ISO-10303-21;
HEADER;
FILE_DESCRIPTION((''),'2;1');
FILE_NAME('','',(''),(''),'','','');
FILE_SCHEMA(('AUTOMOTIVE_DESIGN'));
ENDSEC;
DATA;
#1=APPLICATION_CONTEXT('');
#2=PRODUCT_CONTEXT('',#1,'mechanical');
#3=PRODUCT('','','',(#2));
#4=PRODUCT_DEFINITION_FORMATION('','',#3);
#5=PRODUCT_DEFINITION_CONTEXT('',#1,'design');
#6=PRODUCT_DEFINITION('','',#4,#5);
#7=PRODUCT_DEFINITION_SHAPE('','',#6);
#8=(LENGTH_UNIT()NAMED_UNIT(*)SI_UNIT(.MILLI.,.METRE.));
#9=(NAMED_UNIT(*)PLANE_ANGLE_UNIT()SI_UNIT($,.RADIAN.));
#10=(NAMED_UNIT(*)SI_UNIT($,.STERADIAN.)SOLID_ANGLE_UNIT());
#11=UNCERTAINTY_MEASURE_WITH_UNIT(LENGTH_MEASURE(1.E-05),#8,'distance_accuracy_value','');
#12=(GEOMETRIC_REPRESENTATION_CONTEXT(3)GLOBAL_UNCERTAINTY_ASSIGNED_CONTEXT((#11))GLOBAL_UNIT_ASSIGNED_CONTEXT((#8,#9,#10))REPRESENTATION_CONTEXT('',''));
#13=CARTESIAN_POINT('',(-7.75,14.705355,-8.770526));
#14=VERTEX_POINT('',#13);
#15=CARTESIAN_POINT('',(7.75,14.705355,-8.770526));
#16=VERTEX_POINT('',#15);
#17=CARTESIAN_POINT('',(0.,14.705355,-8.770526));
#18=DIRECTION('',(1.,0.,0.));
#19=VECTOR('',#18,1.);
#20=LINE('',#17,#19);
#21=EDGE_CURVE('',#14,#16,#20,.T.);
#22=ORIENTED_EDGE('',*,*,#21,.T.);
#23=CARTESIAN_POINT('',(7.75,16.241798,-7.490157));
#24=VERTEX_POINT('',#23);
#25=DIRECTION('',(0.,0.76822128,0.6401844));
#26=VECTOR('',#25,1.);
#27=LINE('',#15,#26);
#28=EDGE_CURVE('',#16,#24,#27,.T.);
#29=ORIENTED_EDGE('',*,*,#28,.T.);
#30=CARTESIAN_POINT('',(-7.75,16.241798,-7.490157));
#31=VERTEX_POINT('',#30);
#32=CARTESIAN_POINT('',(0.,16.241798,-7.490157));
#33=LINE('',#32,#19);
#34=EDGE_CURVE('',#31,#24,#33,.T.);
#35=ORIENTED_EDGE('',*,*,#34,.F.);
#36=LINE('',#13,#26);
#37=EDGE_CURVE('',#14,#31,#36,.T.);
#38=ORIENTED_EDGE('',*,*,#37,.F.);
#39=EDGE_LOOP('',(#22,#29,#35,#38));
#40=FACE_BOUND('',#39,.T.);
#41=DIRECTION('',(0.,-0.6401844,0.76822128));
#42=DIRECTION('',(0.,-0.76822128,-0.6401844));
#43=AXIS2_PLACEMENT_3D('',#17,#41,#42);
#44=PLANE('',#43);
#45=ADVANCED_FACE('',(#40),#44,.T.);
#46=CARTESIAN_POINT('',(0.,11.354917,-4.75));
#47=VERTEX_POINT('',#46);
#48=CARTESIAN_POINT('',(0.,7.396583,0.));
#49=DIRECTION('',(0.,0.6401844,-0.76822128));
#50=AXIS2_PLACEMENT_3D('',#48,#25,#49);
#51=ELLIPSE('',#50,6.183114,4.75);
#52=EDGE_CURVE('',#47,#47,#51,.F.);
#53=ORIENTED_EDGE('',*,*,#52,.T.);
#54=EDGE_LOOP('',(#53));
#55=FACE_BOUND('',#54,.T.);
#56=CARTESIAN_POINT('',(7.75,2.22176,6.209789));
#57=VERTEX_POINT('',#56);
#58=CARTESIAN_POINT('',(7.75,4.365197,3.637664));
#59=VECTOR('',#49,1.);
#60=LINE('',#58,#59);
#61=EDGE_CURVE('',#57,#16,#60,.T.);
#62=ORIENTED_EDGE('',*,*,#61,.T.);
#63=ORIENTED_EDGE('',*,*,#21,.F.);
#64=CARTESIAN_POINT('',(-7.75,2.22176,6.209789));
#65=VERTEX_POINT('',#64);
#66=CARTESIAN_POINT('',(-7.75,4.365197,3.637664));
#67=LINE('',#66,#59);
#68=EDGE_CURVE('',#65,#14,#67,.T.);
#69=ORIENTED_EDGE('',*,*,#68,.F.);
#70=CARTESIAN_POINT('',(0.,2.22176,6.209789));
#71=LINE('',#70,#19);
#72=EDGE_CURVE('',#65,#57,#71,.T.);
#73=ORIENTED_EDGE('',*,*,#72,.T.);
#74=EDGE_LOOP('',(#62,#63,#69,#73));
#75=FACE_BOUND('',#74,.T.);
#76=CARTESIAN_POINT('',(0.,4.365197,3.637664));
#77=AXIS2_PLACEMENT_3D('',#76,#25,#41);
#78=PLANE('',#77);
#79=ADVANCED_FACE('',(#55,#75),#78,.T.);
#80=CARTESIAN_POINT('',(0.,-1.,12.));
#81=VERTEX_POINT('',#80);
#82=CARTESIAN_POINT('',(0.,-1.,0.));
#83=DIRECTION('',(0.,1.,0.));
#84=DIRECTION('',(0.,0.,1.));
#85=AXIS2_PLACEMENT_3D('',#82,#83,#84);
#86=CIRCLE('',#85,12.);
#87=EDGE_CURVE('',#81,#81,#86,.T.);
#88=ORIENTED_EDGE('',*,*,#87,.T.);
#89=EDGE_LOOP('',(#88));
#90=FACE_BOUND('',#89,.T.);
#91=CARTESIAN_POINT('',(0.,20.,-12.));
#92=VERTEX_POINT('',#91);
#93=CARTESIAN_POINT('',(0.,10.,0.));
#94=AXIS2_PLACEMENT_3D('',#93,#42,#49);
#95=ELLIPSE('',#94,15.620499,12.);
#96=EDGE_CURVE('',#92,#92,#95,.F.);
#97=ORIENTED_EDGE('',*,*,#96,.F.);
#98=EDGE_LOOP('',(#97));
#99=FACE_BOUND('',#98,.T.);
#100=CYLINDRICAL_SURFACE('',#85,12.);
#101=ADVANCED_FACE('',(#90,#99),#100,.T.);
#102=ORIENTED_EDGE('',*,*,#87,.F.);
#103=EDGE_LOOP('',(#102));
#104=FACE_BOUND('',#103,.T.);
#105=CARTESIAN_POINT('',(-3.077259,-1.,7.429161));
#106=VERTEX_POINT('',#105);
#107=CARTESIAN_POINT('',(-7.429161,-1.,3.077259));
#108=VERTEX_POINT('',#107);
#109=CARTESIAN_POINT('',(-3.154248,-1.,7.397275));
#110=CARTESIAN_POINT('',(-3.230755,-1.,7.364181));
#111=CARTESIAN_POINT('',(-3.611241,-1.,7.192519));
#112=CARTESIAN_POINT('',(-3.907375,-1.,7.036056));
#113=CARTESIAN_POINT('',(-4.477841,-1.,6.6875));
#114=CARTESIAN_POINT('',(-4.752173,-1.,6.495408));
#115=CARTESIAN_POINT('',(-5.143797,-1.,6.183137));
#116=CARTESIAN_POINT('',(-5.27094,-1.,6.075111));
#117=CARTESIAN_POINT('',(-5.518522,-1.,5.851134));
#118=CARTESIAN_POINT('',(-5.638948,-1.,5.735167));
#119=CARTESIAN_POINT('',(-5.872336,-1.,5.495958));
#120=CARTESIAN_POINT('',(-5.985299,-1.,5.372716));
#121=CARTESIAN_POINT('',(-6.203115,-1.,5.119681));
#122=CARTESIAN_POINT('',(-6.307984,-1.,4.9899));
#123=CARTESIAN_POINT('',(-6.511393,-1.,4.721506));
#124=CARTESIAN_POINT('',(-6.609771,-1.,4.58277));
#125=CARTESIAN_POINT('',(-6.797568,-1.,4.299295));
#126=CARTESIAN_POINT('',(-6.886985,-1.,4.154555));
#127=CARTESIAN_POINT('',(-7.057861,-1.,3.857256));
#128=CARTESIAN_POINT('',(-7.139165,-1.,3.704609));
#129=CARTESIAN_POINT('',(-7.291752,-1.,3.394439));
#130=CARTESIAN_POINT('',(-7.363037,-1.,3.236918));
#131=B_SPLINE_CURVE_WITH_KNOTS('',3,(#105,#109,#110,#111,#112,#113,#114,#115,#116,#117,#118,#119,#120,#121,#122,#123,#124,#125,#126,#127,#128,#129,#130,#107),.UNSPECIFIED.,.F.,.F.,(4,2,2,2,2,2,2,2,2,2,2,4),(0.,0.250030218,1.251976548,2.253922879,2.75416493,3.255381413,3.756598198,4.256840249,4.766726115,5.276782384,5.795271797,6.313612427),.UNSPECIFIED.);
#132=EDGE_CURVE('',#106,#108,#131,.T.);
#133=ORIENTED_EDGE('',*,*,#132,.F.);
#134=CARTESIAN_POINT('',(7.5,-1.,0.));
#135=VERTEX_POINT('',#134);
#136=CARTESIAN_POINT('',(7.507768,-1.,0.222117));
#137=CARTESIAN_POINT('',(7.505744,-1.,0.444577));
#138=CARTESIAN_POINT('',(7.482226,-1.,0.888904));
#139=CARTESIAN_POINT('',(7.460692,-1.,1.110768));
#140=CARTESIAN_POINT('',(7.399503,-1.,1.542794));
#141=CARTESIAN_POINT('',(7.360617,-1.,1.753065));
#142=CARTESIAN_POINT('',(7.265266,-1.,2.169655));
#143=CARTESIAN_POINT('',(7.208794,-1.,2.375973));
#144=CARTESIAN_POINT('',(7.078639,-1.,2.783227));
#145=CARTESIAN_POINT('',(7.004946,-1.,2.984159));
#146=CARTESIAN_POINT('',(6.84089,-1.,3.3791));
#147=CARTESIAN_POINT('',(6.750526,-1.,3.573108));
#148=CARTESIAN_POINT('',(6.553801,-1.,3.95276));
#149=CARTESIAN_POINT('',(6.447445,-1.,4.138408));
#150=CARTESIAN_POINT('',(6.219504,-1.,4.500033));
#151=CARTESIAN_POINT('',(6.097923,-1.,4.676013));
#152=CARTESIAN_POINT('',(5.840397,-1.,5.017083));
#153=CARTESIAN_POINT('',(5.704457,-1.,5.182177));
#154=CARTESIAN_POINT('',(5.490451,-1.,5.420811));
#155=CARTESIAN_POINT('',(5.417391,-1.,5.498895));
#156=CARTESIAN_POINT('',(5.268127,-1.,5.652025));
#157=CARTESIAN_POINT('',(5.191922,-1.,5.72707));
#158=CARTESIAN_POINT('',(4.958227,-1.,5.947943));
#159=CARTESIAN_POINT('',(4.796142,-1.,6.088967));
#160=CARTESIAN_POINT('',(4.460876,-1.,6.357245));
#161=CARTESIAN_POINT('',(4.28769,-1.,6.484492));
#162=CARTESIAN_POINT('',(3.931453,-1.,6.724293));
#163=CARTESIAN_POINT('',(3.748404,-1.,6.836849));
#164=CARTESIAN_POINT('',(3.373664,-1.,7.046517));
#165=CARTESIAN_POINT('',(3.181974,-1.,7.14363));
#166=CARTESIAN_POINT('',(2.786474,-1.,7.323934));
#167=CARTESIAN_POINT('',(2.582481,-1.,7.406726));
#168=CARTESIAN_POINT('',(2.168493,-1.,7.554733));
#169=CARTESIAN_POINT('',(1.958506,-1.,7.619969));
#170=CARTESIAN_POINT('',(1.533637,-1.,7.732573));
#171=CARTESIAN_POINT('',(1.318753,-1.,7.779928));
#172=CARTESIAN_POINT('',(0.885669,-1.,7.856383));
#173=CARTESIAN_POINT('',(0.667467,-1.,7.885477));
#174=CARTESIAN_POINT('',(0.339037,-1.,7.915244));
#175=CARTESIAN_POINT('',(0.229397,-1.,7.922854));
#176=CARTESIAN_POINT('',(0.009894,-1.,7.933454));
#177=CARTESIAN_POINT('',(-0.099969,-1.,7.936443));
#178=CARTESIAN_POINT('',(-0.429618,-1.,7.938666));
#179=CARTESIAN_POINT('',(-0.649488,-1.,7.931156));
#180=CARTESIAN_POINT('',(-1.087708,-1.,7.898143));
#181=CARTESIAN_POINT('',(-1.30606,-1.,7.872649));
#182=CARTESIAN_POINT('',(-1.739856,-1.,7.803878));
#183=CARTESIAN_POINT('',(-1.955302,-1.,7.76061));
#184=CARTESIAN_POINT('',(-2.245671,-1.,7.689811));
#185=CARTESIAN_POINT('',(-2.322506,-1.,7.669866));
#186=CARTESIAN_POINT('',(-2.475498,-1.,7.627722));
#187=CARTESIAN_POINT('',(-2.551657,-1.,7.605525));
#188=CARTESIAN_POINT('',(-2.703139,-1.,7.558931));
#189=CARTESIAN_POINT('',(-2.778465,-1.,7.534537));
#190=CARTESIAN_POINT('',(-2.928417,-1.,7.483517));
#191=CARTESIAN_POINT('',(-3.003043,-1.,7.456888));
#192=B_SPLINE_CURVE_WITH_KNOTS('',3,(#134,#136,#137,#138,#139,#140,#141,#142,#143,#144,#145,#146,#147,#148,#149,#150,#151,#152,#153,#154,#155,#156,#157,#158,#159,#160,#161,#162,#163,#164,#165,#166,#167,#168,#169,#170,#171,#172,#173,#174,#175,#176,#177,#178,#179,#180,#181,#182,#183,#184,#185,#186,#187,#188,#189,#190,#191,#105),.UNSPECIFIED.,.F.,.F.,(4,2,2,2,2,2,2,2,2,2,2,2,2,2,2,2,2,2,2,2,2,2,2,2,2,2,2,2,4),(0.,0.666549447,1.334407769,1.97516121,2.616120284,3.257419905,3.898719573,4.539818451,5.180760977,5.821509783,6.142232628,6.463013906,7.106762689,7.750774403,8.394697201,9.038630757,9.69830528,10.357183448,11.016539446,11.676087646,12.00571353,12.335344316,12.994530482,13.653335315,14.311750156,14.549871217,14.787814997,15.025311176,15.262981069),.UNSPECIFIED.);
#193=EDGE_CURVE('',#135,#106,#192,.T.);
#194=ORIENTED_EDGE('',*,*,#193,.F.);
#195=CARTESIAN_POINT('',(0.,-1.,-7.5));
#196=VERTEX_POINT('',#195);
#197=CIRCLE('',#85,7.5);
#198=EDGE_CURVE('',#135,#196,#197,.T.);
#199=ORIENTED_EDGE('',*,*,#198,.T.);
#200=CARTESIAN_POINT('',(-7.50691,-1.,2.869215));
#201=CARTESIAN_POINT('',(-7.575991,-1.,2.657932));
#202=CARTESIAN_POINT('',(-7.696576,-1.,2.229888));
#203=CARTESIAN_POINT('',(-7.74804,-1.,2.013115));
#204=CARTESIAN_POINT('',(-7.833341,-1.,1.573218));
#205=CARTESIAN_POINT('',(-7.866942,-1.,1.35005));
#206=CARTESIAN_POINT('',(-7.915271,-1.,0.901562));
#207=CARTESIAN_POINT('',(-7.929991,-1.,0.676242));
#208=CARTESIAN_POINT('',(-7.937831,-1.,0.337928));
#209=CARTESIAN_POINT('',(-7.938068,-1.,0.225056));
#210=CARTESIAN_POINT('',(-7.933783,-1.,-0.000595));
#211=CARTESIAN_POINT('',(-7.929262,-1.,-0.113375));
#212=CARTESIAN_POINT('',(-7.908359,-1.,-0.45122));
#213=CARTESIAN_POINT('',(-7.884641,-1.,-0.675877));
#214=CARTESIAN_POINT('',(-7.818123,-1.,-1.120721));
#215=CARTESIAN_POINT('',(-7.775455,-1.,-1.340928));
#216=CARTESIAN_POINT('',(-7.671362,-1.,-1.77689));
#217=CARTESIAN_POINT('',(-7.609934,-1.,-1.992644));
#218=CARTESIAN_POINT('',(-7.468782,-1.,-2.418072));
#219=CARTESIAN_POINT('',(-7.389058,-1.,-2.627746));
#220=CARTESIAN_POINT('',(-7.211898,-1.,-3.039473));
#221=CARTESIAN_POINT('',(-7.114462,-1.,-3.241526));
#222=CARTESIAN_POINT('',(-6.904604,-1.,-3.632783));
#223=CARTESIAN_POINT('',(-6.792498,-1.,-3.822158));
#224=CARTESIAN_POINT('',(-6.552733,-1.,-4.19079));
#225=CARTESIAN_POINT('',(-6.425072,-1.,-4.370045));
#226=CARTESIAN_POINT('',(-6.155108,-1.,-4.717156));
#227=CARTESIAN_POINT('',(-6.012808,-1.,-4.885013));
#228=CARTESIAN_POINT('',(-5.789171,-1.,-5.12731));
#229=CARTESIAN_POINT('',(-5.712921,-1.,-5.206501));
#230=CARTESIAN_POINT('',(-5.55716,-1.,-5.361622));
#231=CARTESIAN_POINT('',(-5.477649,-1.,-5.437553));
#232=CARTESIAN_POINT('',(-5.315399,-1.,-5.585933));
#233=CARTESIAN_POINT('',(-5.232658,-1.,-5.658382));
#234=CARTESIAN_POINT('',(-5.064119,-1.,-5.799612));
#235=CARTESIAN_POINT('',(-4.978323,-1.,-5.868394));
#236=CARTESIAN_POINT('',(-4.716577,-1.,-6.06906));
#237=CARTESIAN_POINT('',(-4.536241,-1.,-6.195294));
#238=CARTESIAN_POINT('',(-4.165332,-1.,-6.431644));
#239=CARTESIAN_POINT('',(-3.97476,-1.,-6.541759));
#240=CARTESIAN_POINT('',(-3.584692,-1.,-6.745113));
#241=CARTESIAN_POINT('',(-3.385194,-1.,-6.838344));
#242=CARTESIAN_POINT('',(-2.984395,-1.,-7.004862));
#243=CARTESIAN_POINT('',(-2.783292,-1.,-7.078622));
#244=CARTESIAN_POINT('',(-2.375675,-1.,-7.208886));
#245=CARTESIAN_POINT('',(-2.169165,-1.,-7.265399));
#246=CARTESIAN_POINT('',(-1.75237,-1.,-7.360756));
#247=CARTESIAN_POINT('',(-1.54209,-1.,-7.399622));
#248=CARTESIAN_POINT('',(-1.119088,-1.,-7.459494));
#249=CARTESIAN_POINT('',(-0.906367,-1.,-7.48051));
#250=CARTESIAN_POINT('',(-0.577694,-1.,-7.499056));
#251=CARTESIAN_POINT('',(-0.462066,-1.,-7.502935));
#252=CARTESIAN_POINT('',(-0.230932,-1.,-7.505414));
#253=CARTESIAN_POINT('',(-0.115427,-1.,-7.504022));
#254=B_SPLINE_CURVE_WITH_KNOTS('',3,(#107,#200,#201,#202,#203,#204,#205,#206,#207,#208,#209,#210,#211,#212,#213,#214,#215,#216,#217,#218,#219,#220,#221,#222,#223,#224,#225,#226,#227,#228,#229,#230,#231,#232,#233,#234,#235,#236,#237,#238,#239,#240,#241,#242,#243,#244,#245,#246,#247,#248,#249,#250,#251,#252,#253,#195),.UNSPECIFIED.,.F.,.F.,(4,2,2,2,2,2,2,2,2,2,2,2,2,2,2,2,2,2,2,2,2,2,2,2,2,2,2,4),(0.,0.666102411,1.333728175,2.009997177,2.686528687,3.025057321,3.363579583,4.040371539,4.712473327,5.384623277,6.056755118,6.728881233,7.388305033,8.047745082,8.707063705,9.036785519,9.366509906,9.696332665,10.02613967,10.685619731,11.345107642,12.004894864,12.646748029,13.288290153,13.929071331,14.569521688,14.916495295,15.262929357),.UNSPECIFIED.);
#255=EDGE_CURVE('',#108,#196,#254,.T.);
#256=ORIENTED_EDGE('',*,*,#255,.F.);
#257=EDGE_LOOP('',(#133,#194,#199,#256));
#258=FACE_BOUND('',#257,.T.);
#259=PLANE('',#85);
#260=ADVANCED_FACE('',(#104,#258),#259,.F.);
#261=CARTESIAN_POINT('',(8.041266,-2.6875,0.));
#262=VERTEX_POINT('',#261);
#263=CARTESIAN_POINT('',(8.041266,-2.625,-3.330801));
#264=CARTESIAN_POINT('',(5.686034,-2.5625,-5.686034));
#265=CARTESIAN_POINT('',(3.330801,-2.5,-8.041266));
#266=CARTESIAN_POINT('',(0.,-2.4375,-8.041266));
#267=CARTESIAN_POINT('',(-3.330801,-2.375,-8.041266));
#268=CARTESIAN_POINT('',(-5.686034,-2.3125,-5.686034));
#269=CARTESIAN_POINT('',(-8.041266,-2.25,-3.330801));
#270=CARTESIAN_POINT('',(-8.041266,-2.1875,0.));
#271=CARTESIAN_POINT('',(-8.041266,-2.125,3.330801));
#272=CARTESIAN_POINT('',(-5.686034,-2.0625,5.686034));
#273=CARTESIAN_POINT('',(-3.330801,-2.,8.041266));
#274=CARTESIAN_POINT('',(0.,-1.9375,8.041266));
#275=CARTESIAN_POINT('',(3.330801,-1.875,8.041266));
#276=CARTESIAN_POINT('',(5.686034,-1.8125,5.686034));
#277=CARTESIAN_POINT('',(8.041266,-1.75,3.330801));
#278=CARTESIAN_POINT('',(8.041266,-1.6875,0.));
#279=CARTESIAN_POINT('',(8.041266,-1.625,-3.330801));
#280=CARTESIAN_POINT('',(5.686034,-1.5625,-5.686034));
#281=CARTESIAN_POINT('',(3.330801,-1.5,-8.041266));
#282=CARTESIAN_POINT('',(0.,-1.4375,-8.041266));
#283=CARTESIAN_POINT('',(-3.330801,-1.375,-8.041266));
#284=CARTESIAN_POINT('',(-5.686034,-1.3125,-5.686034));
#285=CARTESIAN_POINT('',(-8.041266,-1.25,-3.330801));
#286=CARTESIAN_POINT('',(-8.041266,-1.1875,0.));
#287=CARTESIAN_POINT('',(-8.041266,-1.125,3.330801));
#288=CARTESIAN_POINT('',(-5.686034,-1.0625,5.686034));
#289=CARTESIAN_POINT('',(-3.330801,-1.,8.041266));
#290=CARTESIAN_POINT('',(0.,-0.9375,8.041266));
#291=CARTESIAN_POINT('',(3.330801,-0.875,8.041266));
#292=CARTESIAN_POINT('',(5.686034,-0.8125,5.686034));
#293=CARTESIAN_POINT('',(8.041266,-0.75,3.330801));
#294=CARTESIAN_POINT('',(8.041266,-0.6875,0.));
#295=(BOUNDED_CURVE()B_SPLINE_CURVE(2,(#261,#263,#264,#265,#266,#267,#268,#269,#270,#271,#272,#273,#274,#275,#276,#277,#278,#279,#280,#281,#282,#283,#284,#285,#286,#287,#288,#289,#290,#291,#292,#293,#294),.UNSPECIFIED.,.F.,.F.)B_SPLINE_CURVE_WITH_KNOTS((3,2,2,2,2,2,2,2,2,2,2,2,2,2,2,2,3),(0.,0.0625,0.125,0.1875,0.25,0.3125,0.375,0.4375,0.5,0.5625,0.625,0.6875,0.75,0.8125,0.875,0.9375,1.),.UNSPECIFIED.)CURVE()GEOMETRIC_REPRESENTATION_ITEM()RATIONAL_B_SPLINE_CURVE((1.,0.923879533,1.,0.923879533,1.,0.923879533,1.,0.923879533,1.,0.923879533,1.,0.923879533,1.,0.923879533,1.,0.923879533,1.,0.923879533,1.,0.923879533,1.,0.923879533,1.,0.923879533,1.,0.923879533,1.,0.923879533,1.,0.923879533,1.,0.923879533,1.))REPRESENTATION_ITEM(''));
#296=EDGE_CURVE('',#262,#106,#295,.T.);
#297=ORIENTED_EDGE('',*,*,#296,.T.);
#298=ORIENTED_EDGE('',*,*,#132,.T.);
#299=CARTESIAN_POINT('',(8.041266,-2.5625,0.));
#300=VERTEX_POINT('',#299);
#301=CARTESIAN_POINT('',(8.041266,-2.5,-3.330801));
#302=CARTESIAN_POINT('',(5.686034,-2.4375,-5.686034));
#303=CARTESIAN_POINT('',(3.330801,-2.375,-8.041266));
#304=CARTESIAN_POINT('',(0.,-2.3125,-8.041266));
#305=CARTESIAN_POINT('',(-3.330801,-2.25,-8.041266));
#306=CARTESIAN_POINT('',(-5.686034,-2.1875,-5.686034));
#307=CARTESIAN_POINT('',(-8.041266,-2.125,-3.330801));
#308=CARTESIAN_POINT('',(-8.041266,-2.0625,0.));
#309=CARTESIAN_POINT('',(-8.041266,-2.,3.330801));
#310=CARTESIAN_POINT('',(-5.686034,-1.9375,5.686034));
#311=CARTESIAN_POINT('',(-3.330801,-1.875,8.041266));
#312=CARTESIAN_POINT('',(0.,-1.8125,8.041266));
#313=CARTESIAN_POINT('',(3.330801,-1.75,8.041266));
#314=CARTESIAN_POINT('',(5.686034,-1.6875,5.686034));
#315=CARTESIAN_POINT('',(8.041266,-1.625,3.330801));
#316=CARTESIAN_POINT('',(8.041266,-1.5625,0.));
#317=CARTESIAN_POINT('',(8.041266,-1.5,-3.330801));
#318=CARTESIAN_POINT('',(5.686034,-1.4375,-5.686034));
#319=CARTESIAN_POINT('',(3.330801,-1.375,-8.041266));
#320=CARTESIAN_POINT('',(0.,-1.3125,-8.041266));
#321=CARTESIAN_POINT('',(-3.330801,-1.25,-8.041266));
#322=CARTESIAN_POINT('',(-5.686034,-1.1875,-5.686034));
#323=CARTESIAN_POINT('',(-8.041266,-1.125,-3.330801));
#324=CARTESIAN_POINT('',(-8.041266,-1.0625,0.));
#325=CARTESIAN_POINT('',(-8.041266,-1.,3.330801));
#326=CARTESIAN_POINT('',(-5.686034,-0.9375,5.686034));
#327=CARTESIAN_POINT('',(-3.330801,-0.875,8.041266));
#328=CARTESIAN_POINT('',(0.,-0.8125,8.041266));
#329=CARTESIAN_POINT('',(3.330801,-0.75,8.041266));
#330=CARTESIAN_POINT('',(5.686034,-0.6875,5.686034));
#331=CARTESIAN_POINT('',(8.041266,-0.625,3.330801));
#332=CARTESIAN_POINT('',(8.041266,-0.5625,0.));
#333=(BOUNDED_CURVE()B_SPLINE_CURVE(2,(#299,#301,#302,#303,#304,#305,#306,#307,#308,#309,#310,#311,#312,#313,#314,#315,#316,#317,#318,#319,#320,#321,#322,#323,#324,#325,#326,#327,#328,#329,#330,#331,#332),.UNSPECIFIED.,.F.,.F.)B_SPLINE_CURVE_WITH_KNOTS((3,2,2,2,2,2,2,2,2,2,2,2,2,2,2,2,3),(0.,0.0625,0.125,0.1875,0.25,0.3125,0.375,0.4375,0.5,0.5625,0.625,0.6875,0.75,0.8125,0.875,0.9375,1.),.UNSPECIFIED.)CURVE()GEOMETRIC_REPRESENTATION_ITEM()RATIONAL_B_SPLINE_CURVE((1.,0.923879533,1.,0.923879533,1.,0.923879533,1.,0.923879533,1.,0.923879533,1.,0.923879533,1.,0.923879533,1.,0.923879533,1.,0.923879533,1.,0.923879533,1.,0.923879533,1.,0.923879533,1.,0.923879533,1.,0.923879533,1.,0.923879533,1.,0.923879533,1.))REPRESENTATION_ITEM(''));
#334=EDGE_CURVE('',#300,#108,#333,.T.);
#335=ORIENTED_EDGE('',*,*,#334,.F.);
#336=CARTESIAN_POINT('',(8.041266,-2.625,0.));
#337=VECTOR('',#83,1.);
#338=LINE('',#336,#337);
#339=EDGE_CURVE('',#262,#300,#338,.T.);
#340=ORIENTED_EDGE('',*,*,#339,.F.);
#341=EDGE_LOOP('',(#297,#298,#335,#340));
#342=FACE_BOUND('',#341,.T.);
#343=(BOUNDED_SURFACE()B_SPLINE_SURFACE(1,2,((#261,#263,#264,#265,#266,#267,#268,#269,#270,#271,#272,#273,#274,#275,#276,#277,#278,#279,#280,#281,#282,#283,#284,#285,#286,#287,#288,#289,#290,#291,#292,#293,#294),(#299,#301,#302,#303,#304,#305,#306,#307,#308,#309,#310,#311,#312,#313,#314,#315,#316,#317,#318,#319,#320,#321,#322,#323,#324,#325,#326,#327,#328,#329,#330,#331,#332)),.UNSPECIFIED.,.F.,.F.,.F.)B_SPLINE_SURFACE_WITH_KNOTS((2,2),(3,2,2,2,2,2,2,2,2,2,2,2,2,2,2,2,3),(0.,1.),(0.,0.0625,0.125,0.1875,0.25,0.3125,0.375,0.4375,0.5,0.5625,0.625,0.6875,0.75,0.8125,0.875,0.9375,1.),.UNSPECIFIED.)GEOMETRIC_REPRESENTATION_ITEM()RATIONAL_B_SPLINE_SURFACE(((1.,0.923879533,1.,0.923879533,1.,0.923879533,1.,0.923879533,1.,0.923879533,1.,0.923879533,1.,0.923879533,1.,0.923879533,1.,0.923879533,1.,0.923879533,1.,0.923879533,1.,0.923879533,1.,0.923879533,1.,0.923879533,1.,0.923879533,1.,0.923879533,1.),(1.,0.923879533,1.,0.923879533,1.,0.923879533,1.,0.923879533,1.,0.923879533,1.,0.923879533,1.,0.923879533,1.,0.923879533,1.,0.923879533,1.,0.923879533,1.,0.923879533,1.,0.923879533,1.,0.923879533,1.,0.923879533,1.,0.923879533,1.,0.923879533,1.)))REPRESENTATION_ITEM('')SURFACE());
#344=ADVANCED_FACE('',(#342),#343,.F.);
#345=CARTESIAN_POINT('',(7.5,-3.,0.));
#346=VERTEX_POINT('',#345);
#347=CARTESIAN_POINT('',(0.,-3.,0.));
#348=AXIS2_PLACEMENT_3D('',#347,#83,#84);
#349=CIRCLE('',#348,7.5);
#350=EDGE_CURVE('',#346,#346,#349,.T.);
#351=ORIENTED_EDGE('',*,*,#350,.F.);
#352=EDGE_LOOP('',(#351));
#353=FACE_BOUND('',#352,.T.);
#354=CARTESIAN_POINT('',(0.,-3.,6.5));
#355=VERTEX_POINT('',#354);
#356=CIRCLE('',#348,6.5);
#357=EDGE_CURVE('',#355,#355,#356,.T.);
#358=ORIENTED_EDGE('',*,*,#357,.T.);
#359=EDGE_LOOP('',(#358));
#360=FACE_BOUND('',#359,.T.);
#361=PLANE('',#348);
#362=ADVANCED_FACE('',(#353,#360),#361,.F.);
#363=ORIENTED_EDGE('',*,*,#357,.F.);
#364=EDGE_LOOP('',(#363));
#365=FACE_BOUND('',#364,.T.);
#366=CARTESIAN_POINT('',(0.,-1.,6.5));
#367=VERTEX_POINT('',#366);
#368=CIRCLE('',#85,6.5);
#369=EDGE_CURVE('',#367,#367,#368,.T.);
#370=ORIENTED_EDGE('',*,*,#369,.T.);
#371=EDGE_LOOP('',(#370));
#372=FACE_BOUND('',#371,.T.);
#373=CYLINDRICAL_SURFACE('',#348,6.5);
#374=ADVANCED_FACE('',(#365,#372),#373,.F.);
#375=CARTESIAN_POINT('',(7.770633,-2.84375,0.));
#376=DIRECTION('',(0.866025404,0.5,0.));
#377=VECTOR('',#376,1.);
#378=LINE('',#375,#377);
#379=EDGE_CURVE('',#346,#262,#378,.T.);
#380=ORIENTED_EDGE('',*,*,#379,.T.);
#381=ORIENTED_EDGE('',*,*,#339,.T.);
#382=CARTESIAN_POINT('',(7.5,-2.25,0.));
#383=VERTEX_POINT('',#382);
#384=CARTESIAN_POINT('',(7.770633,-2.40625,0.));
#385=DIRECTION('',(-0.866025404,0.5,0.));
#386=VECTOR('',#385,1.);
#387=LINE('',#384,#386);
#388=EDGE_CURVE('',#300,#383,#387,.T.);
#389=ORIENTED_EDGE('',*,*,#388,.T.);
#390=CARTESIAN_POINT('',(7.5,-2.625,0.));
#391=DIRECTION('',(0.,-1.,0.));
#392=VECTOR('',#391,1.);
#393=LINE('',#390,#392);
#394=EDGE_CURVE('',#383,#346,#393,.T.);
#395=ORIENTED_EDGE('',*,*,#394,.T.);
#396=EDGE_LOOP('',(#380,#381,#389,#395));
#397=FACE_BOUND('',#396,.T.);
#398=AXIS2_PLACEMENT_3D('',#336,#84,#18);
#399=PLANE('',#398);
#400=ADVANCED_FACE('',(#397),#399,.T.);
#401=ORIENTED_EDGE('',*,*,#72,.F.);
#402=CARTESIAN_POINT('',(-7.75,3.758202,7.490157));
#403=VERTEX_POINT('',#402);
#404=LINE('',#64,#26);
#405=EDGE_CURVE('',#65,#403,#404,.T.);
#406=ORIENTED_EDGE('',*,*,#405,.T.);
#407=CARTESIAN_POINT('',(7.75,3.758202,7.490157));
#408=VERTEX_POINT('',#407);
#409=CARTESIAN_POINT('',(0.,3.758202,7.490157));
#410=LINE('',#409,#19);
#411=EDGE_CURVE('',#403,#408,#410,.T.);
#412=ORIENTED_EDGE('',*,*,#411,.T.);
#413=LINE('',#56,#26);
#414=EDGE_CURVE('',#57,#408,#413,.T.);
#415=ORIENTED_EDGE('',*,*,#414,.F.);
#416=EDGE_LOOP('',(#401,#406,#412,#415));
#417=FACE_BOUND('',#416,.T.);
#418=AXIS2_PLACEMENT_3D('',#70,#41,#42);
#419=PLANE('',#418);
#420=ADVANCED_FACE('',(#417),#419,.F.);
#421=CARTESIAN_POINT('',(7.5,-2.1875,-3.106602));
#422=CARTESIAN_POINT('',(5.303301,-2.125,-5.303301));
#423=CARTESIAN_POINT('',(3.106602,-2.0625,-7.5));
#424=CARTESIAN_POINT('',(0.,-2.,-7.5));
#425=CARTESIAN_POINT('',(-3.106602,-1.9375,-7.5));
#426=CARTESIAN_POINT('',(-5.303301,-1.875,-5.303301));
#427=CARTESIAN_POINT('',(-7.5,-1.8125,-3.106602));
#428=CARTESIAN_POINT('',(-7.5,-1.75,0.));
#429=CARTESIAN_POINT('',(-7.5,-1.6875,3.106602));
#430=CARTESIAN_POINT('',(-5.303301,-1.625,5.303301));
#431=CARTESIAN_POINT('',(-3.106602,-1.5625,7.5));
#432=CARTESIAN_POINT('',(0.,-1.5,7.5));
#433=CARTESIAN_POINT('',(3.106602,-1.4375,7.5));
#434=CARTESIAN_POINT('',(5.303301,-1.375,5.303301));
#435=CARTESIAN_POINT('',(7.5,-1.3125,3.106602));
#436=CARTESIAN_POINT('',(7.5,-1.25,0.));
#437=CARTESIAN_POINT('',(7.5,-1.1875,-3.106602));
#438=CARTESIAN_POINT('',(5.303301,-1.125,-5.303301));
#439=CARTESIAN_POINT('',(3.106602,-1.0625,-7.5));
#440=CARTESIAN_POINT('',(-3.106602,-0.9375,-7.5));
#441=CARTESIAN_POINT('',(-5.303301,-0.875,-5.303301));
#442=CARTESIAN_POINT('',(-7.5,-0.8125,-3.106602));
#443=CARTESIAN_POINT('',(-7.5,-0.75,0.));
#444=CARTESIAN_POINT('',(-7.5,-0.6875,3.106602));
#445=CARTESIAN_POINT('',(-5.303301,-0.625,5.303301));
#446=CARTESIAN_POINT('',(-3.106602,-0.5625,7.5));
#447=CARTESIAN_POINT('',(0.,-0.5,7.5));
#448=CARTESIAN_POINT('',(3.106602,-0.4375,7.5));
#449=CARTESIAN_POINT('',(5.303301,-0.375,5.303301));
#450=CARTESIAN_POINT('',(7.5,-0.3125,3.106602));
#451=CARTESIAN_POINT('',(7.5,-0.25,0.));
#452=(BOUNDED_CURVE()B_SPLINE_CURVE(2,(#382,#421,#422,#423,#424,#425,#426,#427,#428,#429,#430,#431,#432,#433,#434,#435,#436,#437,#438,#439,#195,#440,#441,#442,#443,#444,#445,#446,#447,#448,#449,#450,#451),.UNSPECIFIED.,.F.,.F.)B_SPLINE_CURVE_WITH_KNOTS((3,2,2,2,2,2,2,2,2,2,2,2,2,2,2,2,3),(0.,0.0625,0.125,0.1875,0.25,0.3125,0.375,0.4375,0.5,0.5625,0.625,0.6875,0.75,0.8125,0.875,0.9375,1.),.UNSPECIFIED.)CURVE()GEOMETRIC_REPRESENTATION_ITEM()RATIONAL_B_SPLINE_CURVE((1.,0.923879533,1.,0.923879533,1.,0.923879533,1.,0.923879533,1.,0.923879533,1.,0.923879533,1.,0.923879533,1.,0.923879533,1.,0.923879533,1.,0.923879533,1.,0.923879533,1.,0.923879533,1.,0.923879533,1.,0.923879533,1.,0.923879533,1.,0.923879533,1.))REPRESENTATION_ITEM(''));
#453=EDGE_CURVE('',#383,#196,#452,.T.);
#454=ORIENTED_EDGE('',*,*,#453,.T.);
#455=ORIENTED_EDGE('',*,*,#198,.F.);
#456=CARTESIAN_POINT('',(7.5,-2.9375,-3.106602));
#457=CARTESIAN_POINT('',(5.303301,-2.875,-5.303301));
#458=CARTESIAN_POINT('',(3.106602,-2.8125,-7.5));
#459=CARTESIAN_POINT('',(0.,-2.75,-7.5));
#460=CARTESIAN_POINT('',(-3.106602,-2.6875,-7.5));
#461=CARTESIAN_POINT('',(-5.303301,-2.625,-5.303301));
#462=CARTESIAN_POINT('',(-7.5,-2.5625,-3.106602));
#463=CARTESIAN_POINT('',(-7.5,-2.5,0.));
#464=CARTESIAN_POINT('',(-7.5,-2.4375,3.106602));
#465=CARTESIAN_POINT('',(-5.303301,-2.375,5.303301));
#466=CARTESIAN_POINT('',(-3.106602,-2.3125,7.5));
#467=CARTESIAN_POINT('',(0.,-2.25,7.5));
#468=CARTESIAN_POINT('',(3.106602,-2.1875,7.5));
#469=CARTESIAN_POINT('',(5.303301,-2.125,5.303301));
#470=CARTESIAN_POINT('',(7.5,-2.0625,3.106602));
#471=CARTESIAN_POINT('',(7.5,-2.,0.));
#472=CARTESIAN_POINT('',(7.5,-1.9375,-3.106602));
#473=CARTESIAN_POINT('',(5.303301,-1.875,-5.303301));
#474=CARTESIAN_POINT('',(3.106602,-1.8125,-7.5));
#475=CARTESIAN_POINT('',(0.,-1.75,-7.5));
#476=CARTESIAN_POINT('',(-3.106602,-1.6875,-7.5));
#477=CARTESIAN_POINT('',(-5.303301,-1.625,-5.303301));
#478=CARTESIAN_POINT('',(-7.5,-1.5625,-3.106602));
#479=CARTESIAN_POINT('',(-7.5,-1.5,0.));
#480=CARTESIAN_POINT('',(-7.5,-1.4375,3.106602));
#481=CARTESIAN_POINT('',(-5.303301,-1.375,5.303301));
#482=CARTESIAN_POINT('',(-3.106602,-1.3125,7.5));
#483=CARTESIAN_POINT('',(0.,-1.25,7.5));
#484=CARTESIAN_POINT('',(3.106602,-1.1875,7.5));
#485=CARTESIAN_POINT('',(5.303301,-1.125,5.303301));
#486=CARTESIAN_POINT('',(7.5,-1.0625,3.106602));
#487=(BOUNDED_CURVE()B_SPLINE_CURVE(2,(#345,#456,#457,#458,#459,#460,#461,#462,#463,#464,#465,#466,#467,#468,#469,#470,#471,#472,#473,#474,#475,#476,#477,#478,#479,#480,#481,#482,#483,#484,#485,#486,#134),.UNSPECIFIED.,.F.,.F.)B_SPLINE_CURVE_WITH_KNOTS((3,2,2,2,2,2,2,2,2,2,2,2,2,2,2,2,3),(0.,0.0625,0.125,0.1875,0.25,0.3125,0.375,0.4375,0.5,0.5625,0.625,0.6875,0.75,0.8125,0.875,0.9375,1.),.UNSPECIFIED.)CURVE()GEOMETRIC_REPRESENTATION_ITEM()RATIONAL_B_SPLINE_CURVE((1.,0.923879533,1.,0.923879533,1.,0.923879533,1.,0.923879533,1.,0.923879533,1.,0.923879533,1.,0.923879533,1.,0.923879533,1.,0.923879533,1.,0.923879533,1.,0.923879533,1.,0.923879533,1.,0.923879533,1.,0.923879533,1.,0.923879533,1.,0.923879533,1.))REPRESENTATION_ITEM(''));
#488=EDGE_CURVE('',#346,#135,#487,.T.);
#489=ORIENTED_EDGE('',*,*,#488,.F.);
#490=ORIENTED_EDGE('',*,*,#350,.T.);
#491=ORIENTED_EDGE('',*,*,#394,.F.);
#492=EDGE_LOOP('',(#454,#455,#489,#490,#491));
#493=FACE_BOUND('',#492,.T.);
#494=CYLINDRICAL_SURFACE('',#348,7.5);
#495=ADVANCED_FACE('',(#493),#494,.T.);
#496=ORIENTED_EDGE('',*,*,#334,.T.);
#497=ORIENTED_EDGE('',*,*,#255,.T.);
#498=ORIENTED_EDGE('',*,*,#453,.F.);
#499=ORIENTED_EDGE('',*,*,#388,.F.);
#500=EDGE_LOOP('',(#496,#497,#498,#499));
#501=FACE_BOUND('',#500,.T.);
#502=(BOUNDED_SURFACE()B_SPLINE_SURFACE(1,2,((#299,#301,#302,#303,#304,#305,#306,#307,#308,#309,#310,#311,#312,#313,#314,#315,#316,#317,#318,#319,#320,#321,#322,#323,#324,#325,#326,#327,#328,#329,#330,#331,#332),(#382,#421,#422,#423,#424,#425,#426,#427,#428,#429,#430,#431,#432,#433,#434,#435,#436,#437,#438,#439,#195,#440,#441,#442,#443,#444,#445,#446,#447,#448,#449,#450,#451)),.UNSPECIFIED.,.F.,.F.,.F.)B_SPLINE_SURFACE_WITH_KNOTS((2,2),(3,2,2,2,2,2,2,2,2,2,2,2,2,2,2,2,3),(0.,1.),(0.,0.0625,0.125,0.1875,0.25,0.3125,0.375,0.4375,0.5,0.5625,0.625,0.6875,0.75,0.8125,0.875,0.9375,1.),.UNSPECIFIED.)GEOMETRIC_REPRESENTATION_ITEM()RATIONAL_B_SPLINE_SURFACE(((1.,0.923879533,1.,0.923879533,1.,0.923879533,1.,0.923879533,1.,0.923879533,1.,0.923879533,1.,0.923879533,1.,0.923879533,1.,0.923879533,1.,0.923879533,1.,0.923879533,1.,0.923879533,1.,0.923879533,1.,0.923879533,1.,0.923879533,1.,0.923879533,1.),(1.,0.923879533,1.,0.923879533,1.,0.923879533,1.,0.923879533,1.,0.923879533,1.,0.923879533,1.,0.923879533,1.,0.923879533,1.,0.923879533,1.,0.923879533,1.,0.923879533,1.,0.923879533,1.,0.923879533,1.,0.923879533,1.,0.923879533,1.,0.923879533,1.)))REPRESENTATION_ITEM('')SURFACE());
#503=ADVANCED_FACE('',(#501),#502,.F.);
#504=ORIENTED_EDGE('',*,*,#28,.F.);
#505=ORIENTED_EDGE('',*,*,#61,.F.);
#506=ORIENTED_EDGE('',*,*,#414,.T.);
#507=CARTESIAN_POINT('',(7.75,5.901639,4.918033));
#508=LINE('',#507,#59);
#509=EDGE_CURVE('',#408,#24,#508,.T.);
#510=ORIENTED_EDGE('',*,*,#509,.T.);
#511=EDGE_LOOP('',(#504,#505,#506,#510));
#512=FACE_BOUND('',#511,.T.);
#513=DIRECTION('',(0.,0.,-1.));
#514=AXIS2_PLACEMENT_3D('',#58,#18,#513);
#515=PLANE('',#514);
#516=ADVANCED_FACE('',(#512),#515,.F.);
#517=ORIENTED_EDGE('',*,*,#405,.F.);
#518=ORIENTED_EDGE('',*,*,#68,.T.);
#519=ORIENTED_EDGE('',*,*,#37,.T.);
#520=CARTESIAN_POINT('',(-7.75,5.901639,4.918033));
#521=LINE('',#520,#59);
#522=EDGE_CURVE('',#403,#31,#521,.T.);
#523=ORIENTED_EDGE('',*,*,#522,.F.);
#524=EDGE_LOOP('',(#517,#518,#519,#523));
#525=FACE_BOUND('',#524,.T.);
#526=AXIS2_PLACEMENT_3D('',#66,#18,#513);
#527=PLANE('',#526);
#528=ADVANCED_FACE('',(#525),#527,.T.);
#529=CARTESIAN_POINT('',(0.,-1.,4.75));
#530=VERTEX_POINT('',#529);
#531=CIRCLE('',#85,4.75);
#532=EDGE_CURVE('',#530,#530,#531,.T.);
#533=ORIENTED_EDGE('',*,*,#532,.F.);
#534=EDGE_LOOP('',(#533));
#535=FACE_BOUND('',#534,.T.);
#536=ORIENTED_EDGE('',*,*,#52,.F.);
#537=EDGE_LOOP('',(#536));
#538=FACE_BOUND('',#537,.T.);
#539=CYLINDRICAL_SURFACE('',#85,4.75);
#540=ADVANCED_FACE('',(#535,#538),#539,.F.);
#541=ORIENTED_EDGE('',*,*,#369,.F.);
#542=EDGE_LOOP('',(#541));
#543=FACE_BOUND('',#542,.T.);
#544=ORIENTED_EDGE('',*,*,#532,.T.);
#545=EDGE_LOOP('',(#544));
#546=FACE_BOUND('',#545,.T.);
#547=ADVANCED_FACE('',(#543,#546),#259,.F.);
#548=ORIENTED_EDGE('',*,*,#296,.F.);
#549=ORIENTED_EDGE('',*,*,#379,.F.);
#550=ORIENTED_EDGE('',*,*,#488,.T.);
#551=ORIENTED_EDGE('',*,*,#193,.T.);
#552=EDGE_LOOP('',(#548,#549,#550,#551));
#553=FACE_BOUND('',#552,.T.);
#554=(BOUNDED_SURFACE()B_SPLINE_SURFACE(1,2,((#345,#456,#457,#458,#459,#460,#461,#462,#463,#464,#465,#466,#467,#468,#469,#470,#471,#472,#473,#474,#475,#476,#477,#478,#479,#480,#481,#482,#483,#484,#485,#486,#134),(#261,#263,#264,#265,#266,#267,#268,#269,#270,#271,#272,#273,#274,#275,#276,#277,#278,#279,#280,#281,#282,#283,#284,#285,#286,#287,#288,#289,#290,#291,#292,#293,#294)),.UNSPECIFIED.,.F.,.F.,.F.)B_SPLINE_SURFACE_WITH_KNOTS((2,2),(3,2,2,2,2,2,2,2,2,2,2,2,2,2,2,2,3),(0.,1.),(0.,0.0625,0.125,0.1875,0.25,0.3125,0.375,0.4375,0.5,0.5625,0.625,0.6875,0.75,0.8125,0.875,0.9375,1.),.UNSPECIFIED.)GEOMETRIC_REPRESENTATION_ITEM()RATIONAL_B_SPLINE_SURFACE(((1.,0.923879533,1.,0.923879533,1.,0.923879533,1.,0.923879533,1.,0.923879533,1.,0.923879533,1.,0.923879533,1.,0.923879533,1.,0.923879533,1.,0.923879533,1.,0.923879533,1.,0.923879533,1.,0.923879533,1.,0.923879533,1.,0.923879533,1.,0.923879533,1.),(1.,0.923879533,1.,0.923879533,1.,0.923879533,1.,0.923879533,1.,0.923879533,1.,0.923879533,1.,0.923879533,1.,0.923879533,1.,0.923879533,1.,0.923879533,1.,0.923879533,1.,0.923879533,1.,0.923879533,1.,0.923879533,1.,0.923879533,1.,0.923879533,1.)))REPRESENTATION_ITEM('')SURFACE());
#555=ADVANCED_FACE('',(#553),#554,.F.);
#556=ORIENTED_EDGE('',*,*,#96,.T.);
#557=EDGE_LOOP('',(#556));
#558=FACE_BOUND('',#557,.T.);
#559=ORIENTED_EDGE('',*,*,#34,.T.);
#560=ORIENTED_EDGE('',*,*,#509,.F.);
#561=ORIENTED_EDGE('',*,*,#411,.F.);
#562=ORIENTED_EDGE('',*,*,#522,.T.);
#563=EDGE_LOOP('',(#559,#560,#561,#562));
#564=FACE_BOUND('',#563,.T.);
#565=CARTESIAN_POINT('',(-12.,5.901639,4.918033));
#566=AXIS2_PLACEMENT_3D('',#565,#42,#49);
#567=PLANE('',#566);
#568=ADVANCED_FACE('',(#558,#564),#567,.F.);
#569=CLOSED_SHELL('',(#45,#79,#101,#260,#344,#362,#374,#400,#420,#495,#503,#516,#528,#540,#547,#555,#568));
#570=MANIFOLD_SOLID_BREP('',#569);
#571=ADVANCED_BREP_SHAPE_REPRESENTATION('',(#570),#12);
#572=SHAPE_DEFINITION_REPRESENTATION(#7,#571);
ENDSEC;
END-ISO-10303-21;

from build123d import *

# Parameters (mm, degrees)
SKETCH2_R           = 12
SKETCH2_R_2         = 7.5
SKETCH2_R_3         = 6.5
SKETCH2_R_4         = 4.75
BOSS_EXTRUDE2_DEPTH = 1
SKETCH2_4_R         = 7.5
SKETCH2_4_R_2       = 6.5
BOSS_EXTRUDE3_DEPTH = 3
BOSS_EXTRUDE4_START = 20
SKETCH2_5_R         = 12
SKETCH2_5_R_2       = 4.75
BOSS_EXTRUDE4_DEPTH = 20
CUT_EXTRUDE1_START  = -12.0000001
CUT_EXTRUDE1_DEPTH  = 24.0000001
CUT_EXTRUDE5_DEPTH  = 2
SKETCH11_W          = 15.5
SKETCH11_H          = 2
CUT_EXTRUDE6_DEPTH  = 18
THREAD2_PITCH       = 1


# Read off the part's stored shape, not the designer's step: Cut-Extrude1
with BuildPart() as part:
    # Sketch2 → Boss-Extrude2 (new body)
    # profile 1 of 3: a face of its own
    with BuildSketch(Plane(origin=(0, 0, 0), x_dir=(1, 0, 0), z_dir=(0, 1, 0))):
        with Locations(Location((0, 0, 0), (0, 0, 270))):
            Circle(SKETCH2_R)
        Circle(SKETCH2_R_2, mode=Mode.SUBTRACT)
    # profile 2 of 3: a face of its own
    with BuildSketch(Plane(origin=(0, 0, 0), x_dir=(1, 0, 0), z_dir=(0, 1, 0))):
        Circle(SKETCH2_R_2)
        Circle(SKETCH2_R_3, mode=Mode.SUBTRACT)
    # profile 3 of 3: a face of its own
    with BuildSketch(Plane(origin=(0, 0, 0), x_dir=(1, 0, 0), z_dir=(0, 1, 0))):
        Circle(SKETCH2_R_3)
        with Locations(Location((0, 0, 0), (0, 0, 270))):
            Circle(SKETCH2_R_4, mode=Mode.SUBTRACT)
    extrude(amount=-BOSS_EXTRUDE2_DEPTH)

    # Sketch2<4> → Boss-Extrude3 (add)
    with BuildSketch(Plane(origin=(0, 0, 0), x_dir=(1, 0, 0), z_dir=(0, 1, 0))):
        with Locations(Location((0, 0, 0), (0, 0, 270))):
            Circle(SKETCH2_4_R)
        with Locations(Location((0, 0, 0), (0, 0, 270))):
            Circle(SKETCH2_4_R_2, mode=Mode.SUBTRACT)
    extrude(amount=-BOSS_EXTRUDE3_DEPTH)

    # Sketch2<5> → Boss-Extrude4 (add)
    with BuildSketch(Plane(origin=(0, 0, 0), x_dir=(1, 0, 0), z_dir=(0, 1, 0)).offset(BOSS_EXTRUDE4_START)):
        with Locations(Location((0, 0, 0), (0, 0, 270))):
            Circle(SKETCH2_5_R)
        with Locations(Location((0, 0, 0), (0, 0, 270))):
            Circle(SKETCH2_5_R_2, mode=Mode.SUBTRACT)
    extrude(amount=-BOSS_EXTRUDE4_DEPTH)

    # Cut-Extrude1 outline → Cut-Extrude1 (cut)
    with BuildSketch(Plane(origin=(0, 0, 0), x_dir=(0, 0, -1), z_dir=(1, 0, 0)).offset(CUT_EXTRUDE1_START)):
        Polygon((-12, 20), (-12, 0), (12, 20), align=None)
    extrude(amount=CUT_EXTRUDE1_DEPTH, mode=Mode.SUBTRACT)

    # Sketch10 → Cut-Extrude5 (cut)
    with BuildSketch(Plane(origin=(0, 5.901639344, 4.918032787), x_dir=(1, 0, 0), z_dir=(0, 0.768221279597376, 0.6401843996644798))):
        with BuildLine():
            Line((-4.75, 6.401843997), (-7.75, 6.401843997))
            Line((-7.75, 6.401843997), (-7.75, -3.348156003))
            Line((-7.75, -3.348156003), (7.75, -3.348156003))
            Line((7.75, -3.348156003), (7.75, 6.401843997))
            Line((7.75, 6.401843997), (4.75, 6.401843997))
            add(Edge.make_bspline(
                [(-4.75, 6.401843997), (-4.75, 0.21872967), (0, 0.21872967), (4.75, 0.21872967), (4.75, 6.401843997)],
                knots=[1.570796327, 1.570796327, 1.570796327, 3.141592654, 3.141592654, 4.71238898, 4.71238898, 4.71238898], degree=2, weights=[1, 0.707106781, 1, 0.707106781, 1]))
        make_face()
        with BuildLine():
            Line((-7.75, 16.151843997), (-7.75, 6.401843997))
            Line((-7.75, 6.401843997), (-4.75, 6.401843997))
            add(Edge.make_bspline(
                [(0, 12.584958323), (-4.75, 12.584958323), (-4.75, 6.401843997)],
                knots=[0, 0, 0, 1.570796327, 1.570796327, 1.570796327], degree=2, weights=[1, 0.707106781, 1]))
            add(Edge.make_bspline(
                [(4.75, 6.401843997), (4.75, 12.584958323), (0, 12.584958323)],
                knots=[4.71238898, 4.71238898, 4.71238898, 6.283185307, 6.283185307, 6.283185307], degree=2, weights=[1, 0.707106781, 1]))
            Line((4.75, 6.401843997), (7.75, 6.401843997))
            Line((7.75, 6.401843997), (7.75, 16.151843997))
            Line((7.75, 16.151843997), (-7.75, 16.151843997))
        make_face()
    extrude(amount=-CUT_EXTRUDE5_DEPTH, mode=Mode.SUBTRACT)

    # Sketch11 → Cut-Extrude6 (cut)
    with BuildSketch(Plane(origin=(0, -2.143437241, 2.572124689), x_dir=(-1, 0, 0), z_dir=(0, 0.6401843996644799, -0.7682212795973757))):
        with Locations((0, 6.682212796)):
            Rectangle(SKETCH11_W, SKETCH11_H)
    extrude(amount=CUT_EXTRUDE6_DEPTH, mode=Mode.SUBTRACT)

    # Thread2: the profile of Thread Profile2 profile screwed along a right-hand helix of 2 turns, 8 arcs to a turn; built about Z, then put on its axis
    thread2_z = Axis((0, 0, 0), (0, 0, 1))
    thread2_corners = [(7.4997, 0, -0.000173205), (8.041265875, 0, 0.312499999), (8.041265875, 0, 0.437499999), (7.4997, 0, 0.750173202)]
    with BuildLine(mode=Mode.PRIVATE) as thread2_profile:
        Line(thread2_corners[0], thread2_corners[1])
        Line(thread2_corners[1], thread2_corners[2])
        Line(thread2_corners[2], thread2_corners[3])
        Line(thread2_corners[3], thread2_corners[0])
    thread2_cap = Face(thread2_profile.wire())
    thread2_turn_angles = [0, 22.5, 45, 67.5, 90, 112.5, 135, 157.5, 180, 202.5, 225, 247.5, 270, 292.5, 315, 337.5, 360]
    thread2_turn_weights = [1, 0.9238795325112867, 1, 0.9238795325112867, 1, 0.9238795325112867, 1, 0.9238795325112867, 1, 0.9238795325112867, 1, 0.9238795325112867, 1, 0.9238795325112867, 1, 0.9238795325112867, 1]
    thread2_turn_rails = [Edge.make_bspline([Vector(p[0], p[1], 0).rotate(thread2_z, thread2_turn_angles[k]) / thread2_turn_weights[k] + Vector(0, 0, p[2] + THREAD2_PITCH * thread2_turn_angles[k] / 360) for k in range(17)], [0, 0, 0, 1, 1, 2, 2, 3, 3, 4, 4, 5, 5, 6, 6, 7, 7, 8, 8, 8], 2, thread2_turn_weights) for p in thread2_corners]
    thread2_turn_sides = [Face.make_surface_from_curves(thread2_turn_rails[p[0]], thread2_turn_rails[p[1]]) for p in [(0, 1), (1, 2), (2, 3), (3, 0)]]
    thread2 = Plane(origin=(0, -3, 0), x_dir=(1, 0, 0), z_dir=(0, 1, 0)) * Solid(Shell([*[p.moved(Location((0, 0, THREAD2_PITCH * i))) for i in range(2) for p in thread2_turn_sides], thread2_cap, thread2_cap.rotate(thread2_z, 720).moved(Location((0, 0, THREAD2_PITCH * 720 / 360)))]))
    add(thread2)


solid = part.part
